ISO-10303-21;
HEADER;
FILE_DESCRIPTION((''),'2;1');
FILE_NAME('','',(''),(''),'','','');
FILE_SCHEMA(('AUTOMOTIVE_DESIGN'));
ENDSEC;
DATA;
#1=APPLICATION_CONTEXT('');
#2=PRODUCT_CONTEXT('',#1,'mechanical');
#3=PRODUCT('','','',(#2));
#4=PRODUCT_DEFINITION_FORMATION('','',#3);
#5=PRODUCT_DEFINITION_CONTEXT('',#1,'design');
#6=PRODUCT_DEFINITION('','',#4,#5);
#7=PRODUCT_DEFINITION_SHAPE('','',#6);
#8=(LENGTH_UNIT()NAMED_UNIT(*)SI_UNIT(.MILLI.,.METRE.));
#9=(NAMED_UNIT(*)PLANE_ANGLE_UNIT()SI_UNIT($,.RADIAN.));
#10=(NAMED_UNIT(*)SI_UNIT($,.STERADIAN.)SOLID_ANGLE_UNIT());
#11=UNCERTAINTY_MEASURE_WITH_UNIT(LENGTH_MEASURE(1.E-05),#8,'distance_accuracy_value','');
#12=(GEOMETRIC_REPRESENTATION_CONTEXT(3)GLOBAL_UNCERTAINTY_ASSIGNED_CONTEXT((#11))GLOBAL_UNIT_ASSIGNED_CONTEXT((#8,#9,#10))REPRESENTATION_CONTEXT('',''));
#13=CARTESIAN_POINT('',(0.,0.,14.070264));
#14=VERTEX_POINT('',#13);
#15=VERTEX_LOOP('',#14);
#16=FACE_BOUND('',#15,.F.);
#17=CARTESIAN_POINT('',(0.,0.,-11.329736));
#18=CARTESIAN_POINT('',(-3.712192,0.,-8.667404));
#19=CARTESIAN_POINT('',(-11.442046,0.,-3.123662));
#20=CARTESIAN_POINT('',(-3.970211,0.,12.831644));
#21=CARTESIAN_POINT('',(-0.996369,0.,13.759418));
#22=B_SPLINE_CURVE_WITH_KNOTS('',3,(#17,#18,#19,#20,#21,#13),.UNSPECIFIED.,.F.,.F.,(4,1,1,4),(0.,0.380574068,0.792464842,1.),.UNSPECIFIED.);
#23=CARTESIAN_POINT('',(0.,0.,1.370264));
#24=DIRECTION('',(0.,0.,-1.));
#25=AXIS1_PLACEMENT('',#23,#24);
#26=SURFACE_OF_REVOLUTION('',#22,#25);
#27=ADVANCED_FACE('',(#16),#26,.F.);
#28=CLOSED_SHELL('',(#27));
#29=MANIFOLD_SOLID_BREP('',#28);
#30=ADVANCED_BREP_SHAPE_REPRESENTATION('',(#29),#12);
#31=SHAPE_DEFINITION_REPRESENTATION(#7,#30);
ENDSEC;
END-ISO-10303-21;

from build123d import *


with BuildPart() as f1:
    # F0 (on Front) → F1 (revolve)
    with BuildSketch(Plane.XZ):
        with BuildLine():
            Line((0, -11.3297364564), (0, 14.0702635436))
            add(Edge.make_bspline(
                [(0, -11.3297364564), (-3.7121922024, -8.6674044456), (-11.4420457382, -3.1236622617), (-3.9702111404, 12.8316439294), (-0.9963690021, 13.7594180632), (0, 14.0702635436)],
                knots=[0, 0, 0, 0, 0.3805740684, 0.7924648422, 1, 1, 1, 1], degree=3))
        make_face()
    revolve(axis=Axis((0, 0, 1.3702635436), (0, 0, -1)))


solid = f1.part
